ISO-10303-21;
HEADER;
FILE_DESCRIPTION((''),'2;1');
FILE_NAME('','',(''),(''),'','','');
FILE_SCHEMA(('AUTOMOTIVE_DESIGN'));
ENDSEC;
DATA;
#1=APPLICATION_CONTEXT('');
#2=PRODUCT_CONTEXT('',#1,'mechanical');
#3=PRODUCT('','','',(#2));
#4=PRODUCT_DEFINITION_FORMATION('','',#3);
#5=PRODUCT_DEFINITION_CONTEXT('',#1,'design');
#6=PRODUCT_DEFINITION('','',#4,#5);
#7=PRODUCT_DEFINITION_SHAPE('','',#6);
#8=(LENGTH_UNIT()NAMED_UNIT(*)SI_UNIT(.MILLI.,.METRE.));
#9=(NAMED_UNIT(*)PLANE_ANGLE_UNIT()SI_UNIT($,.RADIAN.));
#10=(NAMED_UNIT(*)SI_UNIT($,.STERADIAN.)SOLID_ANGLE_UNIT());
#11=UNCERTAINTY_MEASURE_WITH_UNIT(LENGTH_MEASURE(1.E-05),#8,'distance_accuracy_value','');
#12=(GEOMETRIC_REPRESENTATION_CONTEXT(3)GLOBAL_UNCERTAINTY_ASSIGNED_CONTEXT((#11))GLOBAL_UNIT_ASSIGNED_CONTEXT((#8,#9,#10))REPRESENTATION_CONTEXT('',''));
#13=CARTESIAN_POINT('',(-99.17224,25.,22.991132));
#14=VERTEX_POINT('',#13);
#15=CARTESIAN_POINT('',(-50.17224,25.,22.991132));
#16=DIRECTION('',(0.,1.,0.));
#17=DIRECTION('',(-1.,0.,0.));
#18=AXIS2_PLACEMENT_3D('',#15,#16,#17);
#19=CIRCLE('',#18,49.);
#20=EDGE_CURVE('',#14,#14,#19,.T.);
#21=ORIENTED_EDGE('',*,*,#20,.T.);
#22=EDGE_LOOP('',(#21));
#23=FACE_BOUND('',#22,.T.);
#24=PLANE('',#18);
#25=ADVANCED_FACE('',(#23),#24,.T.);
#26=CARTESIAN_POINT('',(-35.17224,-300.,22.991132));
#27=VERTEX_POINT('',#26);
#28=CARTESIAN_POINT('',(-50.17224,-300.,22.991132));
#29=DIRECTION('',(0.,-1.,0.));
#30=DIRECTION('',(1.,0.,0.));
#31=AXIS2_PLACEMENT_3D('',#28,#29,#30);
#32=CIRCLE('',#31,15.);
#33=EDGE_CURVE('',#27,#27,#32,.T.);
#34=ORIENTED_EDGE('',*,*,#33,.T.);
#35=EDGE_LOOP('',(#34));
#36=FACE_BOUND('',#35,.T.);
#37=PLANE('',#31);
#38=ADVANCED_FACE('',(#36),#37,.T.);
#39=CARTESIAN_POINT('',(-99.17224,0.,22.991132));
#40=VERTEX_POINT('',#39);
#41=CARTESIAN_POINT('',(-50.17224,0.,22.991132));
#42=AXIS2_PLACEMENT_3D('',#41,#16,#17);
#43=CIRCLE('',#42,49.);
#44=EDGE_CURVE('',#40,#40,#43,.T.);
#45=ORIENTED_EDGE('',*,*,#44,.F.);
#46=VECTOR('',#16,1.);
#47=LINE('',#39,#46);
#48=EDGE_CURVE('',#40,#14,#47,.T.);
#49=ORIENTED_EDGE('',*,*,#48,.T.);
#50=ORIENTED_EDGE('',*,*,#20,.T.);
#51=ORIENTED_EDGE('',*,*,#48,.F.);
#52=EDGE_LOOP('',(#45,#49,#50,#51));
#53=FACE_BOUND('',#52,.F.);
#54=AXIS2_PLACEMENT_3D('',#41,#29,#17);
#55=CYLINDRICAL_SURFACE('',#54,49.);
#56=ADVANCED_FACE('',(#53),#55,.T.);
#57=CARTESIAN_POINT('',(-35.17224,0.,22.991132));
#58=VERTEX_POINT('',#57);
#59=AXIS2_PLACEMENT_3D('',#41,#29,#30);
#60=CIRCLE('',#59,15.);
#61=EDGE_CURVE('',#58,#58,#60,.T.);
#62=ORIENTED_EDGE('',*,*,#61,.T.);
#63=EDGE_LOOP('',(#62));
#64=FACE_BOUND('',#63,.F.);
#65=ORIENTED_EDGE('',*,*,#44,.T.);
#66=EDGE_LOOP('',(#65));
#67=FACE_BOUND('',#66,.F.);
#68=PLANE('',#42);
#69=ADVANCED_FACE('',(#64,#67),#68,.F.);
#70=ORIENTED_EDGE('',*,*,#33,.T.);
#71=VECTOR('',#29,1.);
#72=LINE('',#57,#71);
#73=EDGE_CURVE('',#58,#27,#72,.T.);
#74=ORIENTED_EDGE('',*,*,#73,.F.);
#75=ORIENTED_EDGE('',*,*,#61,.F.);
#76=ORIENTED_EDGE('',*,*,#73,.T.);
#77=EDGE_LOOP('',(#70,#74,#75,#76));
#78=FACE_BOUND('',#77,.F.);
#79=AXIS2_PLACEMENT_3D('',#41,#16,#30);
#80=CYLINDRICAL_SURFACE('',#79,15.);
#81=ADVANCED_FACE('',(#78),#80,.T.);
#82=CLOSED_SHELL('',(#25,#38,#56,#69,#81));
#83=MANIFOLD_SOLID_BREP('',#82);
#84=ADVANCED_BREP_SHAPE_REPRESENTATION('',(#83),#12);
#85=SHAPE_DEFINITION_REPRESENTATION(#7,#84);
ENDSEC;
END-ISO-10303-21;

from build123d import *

# Parameters (mm, degrees)
F0_R     = 15
F1_DEPTH = 300
F2_R     = 49
F2_R_2   = 15
F3_DEPTH = 25


with BuildPart() as f1:
    # F0 (on Front) → F1 (new body)
    with BuildSketch(Plane.XZ):
        with Locations((-50.172239542, 22.9911319911)):
            Circle(F0_R)
    extrude(amount=F1_DEPTH)

    # F2 (on face) → F3 (join)
    with BuildSketch(Plane(origin=(0, 0, 0), x_dir=(-1, 0, 0), z_dir=(0, 1, 0))):
        with Locations((50.172239542, 22.9911319911)):
            Circle(F2_R)
        with Locations((50.172239542, 22.9911319911)):
            Circle(F2_R_2, mode=Mode.SUBTRACT)
        with Locations((50.172239542, 22.9911319911)):
            Circle(F2_R_2)
    extrude(amount=F3_DEPTH)


solid = f1.part
